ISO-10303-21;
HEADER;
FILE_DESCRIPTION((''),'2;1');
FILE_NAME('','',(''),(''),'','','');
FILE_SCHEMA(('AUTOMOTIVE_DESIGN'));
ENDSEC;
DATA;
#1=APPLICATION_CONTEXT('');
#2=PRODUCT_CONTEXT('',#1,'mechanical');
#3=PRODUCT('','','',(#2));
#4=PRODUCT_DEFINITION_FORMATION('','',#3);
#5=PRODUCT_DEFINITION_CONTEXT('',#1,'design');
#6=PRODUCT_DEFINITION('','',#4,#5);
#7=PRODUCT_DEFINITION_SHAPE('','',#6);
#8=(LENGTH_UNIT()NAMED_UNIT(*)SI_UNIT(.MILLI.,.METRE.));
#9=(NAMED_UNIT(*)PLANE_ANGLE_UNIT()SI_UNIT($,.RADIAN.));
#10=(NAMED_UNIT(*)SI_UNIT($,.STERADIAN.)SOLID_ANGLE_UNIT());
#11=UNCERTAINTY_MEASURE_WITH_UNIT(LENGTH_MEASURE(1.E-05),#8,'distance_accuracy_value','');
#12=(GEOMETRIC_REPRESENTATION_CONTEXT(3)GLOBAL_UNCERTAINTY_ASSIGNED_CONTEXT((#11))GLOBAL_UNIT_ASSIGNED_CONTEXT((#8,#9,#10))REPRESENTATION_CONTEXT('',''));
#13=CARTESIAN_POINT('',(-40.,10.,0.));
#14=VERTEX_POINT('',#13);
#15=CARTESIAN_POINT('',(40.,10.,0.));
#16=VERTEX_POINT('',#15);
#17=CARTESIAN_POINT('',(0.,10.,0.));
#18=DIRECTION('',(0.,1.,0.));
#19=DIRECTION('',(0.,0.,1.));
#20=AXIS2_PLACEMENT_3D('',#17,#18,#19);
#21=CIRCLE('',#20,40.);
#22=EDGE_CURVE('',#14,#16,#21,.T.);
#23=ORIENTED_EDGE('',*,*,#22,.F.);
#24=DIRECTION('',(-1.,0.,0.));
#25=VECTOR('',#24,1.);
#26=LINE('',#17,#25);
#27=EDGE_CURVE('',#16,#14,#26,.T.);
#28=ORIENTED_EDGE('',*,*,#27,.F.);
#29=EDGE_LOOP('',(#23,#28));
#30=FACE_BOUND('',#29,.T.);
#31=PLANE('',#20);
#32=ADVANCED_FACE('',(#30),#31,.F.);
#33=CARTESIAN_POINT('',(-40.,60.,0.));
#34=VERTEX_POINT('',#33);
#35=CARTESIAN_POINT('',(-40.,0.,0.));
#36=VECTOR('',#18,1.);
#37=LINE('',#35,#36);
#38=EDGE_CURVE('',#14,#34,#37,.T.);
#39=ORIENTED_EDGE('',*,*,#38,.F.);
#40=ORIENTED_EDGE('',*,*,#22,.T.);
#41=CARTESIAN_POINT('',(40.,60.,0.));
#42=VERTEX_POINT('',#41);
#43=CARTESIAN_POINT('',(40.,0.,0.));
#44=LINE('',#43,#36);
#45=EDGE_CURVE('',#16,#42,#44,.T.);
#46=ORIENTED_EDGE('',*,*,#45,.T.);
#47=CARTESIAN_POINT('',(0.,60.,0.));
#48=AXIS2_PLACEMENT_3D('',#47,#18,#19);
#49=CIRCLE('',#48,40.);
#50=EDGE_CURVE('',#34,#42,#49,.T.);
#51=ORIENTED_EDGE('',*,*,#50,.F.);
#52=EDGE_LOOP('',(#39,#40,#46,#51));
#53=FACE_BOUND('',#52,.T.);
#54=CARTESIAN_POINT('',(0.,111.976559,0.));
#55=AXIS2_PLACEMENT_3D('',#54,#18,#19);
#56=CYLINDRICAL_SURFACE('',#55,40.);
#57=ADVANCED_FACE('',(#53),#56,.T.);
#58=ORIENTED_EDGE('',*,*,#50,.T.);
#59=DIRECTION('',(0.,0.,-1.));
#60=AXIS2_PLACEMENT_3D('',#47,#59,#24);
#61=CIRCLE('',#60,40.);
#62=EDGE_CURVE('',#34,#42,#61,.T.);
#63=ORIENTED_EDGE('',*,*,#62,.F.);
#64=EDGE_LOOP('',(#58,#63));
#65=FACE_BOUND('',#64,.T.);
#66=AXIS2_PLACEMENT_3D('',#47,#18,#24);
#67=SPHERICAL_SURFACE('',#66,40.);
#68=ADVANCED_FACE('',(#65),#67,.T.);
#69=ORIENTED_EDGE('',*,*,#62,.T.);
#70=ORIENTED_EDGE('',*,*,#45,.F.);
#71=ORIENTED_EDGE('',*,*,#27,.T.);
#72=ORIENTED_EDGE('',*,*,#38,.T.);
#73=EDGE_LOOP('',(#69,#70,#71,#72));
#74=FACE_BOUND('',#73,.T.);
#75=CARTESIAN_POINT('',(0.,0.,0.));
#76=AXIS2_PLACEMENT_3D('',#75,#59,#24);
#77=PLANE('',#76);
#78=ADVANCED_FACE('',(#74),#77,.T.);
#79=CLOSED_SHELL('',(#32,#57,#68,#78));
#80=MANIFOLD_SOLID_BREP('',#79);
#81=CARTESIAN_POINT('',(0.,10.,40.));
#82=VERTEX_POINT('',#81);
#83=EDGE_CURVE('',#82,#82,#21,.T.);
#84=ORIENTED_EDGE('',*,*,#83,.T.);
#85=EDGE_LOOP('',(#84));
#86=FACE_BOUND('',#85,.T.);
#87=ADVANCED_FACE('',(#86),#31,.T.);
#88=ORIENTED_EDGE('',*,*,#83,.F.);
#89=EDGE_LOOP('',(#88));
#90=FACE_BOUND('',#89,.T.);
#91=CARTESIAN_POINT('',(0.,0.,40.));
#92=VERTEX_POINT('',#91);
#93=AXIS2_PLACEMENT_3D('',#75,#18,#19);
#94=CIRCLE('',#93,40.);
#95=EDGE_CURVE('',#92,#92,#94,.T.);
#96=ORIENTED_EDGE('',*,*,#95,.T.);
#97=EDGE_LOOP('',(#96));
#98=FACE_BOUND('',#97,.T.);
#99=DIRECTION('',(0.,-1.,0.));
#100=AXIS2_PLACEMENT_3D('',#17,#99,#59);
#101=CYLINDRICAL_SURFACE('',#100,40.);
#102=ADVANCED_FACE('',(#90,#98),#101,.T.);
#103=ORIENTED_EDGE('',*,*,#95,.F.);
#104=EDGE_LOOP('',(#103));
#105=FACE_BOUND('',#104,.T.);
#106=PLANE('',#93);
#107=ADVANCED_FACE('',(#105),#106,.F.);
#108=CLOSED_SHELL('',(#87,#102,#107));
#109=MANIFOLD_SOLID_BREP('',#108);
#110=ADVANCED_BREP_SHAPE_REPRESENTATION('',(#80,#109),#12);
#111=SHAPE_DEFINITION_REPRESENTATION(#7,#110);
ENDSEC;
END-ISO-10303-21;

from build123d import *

# Parameters (mm, degrees)
SKETCH_1_R      = 40
EXTRUDE_1_DEPTH = 10
REVOLVE_1_ANGLE = 180


with BuildPart() as part:
    # 草图1 → 凸台-拉伸1 (new body)
    with BuildSketch(Plane(origin=(0, 0, 0), x_dir=(1, 0, 0), z_dir=(0, 1, 0))):
        Circle(SKETCH_1_R)
    extrude(amount=EXTRUDE_1_DEPTH)


with BuildPart() as body_2:
    # 草图2 → 旋转1 (revolve)
    with BuildSketch(Plane.XY):
        with BuildLine():
            ThreePointArc((40, 60), (28.284271247, 88.284271247), (0, 100))
            Line((0, 100), (0, 10))
            Line((0, 10), (40, 10))
            Line((40, 10), (40, 60))
        make_face()
    revolve(axis=Axis((0, 111.976558556, 0), (0, -1, 0)), revolution_arc=REVOLVE_1_ANGLE)


solid = Compound([part.part, body_2.part])
